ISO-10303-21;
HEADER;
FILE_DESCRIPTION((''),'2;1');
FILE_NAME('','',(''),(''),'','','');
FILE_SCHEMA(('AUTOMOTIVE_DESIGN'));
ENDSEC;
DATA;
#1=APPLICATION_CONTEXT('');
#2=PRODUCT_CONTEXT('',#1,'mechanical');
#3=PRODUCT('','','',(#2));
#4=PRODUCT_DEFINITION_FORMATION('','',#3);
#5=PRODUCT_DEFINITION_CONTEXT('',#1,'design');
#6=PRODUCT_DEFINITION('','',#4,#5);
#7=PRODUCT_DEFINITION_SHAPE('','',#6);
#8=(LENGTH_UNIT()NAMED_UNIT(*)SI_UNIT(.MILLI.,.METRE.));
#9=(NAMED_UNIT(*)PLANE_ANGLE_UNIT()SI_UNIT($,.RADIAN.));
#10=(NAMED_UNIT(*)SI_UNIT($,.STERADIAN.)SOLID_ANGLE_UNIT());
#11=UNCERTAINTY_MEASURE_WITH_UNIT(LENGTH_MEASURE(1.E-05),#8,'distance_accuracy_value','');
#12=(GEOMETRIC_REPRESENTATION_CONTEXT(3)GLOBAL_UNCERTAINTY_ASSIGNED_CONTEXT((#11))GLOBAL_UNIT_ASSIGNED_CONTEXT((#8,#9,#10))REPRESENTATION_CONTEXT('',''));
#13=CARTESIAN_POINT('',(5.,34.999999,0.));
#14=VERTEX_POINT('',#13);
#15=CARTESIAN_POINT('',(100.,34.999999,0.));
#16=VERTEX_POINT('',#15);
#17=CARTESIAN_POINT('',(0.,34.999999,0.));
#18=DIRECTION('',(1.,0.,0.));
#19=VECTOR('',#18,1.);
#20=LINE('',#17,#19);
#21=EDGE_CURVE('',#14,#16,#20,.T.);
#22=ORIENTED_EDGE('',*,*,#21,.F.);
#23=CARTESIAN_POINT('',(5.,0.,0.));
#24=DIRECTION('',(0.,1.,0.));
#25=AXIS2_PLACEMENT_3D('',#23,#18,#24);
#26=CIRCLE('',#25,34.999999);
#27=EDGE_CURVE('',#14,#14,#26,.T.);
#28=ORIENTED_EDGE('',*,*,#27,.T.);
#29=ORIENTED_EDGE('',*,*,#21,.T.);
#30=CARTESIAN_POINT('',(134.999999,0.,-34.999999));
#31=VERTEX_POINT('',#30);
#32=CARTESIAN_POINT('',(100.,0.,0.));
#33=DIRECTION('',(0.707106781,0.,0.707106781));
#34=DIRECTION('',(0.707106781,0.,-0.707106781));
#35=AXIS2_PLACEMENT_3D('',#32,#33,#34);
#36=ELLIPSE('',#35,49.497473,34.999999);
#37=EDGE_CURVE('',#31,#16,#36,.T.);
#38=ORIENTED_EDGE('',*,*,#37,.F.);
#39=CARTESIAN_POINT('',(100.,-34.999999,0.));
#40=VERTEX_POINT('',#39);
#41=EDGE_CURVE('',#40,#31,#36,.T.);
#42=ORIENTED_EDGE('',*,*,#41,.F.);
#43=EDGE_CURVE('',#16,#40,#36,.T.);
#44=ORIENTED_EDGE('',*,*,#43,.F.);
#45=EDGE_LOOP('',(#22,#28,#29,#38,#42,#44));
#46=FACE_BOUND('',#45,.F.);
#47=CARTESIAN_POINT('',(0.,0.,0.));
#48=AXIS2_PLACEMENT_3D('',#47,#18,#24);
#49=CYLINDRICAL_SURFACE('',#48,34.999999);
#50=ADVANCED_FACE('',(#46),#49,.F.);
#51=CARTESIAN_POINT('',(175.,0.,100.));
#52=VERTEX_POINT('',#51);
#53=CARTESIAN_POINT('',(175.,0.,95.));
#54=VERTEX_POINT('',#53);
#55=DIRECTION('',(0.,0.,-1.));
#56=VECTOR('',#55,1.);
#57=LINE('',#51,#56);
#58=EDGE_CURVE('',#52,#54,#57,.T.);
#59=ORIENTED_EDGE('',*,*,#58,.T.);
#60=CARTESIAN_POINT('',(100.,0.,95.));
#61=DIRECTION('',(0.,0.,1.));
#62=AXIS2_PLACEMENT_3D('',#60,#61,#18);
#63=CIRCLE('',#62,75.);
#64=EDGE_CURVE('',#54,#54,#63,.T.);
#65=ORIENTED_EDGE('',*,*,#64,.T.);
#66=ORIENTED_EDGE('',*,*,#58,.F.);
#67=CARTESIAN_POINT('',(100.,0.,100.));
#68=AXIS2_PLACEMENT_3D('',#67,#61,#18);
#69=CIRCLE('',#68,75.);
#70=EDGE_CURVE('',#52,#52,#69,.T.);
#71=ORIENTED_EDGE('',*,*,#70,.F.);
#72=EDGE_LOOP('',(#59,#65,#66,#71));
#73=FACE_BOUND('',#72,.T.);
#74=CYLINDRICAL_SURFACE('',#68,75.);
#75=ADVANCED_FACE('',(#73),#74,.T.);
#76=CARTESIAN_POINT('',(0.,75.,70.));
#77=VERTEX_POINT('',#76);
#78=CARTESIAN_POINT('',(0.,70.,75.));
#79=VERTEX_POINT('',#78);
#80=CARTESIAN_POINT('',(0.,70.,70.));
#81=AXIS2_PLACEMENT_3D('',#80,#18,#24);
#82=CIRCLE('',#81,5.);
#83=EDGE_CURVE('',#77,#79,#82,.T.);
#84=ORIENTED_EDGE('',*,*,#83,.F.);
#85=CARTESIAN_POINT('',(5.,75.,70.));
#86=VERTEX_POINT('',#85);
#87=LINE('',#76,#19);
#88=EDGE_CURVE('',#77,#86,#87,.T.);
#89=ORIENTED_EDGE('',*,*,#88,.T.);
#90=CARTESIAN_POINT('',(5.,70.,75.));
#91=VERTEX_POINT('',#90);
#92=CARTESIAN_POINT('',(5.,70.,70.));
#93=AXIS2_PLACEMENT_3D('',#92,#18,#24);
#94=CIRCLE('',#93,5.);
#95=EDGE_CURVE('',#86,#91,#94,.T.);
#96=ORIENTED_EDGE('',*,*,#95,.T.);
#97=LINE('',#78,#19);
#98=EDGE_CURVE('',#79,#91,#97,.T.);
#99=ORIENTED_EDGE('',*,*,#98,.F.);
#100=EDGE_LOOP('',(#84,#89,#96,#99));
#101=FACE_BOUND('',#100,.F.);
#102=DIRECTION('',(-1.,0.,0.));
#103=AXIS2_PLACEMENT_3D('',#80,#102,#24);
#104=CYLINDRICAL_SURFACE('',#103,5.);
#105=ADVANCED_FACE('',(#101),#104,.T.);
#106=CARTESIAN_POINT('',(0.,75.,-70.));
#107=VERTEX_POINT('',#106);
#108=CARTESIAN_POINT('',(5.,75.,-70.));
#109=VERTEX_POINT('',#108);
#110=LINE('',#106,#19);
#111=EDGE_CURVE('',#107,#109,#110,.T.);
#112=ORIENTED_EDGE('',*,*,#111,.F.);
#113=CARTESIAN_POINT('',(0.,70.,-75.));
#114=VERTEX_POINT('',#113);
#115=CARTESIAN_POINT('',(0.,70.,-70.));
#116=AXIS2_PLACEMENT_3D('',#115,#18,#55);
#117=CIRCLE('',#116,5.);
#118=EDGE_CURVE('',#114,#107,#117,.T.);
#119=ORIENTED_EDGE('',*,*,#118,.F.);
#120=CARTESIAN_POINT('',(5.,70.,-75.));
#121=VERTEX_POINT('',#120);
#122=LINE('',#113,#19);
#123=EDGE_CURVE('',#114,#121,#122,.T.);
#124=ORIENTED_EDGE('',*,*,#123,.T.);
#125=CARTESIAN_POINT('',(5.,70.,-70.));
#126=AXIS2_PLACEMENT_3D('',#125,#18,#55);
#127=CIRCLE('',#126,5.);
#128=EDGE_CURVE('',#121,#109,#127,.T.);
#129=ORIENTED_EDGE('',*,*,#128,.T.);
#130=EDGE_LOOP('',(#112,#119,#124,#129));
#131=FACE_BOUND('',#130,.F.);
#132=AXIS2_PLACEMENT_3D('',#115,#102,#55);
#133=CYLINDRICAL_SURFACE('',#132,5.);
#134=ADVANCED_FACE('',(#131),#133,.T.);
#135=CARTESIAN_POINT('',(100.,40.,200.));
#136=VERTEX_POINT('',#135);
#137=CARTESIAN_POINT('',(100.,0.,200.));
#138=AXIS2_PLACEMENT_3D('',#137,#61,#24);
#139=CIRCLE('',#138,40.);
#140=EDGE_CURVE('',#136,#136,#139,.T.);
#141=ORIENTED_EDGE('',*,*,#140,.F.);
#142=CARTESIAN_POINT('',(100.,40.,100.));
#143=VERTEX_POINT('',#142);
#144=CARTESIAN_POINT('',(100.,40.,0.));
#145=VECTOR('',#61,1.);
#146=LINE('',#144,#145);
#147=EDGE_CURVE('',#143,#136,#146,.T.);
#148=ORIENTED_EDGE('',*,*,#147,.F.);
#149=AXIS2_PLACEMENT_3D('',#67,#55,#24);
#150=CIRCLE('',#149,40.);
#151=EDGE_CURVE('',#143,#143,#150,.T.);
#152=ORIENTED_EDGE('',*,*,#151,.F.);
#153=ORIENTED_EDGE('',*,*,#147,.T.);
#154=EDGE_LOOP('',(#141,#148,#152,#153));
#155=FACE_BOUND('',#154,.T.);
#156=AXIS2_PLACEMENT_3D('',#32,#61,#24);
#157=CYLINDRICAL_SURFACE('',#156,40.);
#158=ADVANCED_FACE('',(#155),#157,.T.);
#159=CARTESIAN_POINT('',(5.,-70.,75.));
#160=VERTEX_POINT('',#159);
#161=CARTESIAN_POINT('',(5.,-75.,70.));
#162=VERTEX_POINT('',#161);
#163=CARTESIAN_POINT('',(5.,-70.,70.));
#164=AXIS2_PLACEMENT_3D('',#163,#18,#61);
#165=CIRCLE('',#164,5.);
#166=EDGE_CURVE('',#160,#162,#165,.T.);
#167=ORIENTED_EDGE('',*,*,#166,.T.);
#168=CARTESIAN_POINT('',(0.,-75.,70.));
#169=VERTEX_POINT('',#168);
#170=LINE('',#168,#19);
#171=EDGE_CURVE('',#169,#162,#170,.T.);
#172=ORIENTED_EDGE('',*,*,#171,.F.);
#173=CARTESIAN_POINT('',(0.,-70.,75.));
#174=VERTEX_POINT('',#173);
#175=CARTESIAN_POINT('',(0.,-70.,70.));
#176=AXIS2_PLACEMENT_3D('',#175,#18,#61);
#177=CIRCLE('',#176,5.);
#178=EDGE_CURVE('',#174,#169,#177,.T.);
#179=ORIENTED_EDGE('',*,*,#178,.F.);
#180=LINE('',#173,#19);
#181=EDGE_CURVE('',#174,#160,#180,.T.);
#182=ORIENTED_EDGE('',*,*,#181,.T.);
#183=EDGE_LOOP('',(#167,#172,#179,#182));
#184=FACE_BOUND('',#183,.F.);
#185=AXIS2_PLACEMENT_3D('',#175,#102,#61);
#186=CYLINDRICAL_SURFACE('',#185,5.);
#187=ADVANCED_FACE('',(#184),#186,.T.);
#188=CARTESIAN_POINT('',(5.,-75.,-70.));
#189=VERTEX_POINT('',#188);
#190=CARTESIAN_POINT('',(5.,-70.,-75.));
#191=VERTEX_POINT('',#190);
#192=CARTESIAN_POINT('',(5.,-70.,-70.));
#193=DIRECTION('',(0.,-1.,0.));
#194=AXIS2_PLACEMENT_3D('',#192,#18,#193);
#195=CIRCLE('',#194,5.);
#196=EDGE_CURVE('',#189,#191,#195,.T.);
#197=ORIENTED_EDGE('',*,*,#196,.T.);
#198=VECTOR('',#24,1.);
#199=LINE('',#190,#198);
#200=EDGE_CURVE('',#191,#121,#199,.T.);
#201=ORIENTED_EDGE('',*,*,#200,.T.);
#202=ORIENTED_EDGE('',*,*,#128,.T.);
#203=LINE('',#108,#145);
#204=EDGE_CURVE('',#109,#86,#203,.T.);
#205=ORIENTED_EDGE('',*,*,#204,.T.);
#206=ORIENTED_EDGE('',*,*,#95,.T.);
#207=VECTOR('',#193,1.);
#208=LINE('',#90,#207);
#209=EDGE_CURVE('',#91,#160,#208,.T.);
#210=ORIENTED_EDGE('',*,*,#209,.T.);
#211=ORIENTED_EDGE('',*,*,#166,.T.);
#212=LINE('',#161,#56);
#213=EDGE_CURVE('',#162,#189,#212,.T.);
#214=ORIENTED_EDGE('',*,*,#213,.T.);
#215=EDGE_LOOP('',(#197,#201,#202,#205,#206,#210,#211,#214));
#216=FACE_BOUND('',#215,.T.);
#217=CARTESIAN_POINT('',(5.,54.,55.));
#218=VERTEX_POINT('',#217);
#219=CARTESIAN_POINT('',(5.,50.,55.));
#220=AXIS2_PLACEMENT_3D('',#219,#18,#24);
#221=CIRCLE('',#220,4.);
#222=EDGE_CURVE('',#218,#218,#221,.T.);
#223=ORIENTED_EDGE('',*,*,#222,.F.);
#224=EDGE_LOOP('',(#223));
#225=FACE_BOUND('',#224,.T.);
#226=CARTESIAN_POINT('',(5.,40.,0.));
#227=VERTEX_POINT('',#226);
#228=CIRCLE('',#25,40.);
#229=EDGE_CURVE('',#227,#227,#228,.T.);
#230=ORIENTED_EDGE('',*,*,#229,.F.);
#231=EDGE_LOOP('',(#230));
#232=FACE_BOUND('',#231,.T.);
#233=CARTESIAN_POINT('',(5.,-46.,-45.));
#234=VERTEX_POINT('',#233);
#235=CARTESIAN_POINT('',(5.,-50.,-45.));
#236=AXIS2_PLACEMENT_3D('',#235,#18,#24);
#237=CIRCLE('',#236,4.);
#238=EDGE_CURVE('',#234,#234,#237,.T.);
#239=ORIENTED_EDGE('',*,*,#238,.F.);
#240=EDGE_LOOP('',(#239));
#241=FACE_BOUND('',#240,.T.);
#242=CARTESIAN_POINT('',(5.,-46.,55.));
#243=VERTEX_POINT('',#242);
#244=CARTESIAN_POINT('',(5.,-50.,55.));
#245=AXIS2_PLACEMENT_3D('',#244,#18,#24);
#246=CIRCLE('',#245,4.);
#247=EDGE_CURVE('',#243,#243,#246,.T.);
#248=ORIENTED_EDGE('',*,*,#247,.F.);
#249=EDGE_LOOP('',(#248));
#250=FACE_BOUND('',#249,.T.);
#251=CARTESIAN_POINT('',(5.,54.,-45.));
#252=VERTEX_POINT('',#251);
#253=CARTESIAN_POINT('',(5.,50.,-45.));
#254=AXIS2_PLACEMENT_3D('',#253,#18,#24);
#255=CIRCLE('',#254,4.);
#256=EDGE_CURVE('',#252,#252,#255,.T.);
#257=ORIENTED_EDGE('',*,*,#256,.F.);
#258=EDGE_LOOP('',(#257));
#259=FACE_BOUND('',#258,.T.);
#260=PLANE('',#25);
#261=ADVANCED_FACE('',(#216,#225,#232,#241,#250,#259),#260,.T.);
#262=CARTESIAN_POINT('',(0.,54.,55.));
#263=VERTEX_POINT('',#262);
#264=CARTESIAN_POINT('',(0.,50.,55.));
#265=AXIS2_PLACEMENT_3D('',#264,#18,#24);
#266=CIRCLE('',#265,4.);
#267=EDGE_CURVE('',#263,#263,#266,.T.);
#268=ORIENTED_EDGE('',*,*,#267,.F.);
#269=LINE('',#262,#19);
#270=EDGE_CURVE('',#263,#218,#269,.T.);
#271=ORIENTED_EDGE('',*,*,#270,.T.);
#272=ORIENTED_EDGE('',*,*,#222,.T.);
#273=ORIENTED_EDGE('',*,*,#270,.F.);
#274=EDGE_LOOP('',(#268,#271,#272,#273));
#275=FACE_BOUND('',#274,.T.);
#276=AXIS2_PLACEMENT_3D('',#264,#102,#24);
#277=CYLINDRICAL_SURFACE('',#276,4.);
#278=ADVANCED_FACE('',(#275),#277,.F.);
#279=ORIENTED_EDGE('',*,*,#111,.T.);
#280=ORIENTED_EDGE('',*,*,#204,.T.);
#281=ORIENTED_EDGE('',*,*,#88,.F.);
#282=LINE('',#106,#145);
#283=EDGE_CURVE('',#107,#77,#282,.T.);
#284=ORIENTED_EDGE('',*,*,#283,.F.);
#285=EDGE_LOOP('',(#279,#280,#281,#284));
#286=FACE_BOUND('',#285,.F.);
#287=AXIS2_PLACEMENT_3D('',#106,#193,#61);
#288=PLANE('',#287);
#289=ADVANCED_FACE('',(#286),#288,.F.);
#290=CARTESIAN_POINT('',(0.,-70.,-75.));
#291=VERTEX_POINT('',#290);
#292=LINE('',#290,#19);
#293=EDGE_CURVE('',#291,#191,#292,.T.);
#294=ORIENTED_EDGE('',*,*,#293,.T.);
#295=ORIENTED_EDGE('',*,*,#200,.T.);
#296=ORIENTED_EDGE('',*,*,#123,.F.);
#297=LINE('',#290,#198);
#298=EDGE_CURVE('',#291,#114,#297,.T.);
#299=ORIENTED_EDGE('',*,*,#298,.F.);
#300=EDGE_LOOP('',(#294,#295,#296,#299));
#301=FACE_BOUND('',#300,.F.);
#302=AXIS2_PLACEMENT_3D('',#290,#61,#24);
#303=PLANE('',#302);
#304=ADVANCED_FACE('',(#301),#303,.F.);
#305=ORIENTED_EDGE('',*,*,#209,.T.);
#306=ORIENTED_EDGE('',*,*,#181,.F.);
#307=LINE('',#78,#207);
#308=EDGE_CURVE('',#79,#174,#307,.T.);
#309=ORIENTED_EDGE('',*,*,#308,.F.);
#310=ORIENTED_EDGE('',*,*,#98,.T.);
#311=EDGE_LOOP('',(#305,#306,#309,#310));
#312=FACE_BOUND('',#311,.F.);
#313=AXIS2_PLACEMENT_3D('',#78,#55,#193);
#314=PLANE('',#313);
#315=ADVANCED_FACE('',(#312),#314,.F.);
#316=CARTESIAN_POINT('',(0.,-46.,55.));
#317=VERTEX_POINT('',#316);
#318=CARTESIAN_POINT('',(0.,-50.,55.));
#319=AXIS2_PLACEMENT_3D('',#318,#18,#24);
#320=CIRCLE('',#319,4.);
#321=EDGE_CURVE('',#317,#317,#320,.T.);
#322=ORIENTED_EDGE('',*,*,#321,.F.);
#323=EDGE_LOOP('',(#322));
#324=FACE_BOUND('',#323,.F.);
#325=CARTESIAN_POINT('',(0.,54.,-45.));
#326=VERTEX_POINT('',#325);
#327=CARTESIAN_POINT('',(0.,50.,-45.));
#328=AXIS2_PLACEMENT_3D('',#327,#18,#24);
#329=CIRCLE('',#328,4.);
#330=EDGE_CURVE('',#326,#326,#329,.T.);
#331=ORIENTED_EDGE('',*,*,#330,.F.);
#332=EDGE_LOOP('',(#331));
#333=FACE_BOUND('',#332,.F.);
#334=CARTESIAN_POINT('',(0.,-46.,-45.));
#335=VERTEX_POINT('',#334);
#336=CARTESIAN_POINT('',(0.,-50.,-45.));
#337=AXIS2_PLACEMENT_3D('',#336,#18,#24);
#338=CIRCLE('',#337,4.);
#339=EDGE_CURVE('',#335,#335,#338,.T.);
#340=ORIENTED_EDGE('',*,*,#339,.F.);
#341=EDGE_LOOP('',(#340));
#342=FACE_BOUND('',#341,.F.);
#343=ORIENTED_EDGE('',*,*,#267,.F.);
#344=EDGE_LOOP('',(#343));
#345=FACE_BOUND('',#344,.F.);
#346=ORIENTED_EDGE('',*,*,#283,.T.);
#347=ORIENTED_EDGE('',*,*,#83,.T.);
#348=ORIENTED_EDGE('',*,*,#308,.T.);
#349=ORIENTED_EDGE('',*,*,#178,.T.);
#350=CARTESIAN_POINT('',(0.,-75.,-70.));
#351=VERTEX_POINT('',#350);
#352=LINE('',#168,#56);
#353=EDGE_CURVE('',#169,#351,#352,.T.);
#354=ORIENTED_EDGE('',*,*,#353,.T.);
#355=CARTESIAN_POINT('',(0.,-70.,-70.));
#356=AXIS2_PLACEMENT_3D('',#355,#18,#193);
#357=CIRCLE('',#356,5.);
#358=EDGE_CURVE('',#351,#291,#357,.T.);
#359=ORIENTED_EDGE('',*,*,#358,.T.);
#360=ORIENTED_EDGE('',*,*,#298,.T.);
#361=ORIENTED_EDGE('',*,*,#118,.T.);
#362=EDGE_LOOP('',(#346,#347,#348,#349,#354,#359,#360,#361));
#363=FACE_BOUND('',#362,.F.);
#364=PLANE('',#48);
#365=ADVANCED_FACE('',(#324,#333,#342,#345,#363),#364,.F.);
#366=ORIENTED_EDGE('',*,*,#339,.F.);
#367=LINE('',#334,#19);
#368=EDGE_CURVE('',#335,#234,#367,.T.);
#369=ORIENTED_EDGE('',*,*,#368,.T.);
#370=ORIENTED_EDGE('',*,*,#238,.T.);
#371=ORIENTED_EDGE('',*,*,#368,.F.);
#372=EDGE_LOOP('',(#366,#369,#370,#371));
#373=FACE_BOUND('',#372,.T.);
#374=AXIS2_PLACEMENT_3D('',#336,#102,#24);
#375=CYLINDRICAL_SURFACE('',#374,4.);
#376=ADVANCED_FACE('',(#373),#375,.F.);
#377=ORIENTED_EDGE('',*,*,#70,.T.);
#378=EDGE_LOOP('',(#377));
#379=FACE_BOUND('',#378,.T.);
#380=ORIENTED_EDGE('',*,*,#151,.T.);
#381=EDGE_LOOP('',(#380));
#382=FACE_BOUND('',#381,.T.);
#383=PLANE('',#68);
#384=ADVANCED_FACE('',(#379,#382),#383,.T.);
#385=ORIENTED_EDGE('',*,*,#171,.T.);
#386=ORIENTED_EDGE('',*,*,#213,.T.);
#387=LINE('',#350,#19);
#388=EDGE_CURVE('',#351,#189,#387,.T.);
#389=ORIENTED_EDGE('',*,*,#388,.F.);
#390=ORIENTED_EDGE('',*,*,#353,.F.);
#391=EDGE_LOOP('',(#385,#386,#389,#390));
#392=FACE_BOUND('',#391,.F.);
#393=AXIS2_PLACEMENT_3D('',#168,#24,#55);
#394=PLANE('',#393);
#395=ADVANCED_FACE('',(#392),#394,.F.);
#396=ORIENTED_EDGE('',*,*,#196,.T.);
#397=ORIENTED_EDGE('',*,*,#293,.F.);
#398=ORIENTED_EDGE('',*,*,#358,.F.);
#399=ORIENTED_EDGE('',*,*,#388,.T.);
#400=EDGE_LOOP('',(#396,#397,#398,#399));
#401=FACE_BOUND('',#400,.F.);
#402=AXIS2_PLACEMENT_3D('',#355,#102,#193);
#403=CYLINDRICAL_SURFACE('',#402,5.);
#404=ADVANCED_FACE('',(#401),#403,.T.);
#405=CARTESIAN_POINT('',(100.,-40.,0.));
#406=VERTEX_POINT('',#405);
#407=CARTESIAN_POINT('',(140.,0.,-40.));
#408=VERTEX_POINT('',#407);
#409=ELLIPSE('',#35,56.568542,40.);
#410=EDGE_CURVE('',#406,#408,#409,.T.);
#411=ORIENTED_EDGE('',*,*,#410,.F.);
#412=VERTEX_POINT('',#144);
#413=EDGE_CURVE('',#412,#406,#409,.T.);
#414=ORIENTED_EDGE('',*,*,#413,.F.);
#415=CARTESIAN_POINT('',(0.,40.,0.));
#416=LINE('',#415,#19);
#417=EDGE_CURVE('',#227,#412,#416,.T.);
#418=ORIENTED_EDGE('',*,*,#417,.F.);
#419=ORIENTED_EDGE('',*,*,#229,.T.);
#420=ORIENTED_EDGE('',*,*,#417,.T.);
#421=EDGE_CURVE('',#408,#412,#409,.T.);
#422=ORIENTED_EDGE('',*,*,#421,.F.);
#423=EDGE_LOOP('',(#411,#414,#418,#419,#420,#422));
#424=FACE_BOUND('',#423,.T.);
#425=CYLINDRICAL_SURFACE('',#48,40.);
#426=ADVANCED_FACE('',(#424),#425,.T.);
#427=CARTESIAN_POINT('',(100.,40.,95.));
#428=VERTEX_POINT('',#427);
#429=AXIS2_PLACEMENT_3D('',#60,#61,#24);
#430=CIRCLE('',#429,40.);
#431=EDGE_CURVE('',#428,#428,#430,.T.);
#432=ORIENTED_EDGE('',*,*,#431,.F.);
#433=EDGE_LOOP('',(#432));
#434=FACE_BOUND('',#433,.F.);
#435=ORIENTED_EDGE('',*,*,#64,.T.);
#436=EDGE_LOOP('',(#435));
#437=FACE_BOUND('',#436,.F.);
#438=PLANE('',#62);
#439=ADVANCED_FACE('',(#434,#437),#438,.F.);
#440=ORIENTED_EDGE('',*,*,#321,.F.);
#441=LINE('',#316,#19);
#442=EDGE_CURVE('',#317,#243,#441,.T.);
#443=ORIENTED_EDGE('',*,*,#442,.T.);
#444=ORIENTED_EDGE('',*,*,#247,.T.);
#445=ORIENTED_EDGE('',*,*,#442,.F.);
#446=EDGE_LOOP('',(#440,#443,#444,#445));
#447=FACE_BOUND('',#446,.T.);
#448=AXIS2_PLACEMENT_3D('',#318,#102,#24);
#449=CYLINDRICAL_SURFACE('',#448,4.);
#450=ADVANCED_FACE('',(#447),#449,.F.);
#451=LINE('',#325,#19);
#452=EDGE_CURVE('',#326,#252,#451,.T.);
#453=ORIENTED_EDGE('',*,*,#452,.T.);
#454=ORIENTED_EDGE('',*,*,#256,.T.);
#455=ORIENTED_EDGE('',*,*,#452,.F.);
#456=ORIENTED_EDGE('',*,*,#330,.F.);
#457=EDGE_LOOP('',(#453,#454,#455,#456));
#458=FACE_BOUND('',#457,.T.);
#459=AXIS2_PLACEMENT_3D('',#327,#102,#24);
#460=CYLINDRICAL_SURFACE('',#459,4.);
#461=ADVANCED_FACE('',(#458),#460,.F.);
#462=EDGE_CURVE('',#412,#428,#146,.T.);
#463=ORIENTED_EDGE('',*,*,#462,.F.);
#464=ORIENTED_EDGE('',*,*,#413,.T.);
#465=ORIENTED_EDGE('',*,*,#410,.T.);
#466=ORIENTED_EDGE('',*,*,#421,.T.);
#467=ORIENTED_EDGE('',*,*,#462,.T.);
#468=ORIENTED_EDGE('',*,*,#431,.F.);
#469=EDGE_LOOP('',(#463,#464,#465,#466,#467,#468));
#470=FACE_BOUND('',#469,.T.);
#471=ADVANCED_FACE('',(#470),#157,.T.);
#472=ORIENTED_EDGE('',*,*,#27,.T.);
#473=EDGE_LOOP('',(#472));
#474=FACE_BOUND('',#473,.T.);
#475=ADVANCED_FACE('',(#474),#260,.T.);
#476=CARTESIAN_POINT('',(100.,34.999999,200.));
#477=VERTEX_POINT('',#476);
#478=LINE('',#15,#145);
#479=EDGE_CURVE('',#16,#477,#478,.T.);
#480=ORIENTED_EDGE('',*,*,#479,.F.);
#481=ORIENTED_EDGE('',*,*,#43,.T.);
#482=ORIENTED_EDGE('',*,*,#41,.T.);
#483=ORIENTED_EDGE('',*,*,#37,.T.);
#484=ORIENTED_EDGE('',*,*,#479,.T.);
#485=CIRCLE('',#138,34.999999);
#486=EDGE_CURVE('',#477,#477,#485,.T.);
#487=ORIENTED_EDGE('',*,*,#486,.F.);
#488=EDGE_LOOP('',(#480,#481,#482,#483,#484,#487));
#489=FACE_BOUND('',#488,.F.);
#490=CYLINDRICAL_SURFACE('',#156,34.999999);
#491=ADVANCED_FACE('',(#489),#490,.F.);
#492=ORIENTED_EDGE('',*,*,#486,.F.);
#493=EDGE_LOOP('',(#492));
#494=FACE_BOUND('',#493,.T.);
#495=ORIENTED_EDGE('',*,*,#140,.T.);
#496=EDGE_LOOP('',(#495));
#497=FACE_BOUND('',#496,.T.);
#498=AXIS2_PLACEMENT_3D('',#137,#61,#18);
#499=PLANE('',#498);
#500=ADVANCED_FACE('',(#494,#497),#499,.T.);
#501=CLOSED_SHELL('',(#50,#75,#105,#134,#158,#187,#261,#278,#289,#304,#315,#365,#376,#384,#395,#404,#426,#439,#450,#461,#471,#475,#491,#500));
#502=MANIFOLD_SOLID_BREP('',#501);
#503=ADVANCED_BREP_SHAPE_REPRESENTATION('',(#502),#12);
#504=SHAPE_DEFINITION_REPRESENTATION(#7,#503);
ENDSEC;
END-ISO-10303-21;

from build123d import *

# Parameters (mm, degrees)
F0_R     = 40
F0_R_2   = 34.9999991059
F5_R     = 75
F5_R_2   = 40
F6_DEPTH = 5
F2_R     = 4
F7_DEPTH = 5


with BuildPart() as f3:
    # F3: sweep along a path in F1
    with BuildLine(Plane.XZ) as f3_path:
        Line((0, 0), (100, 0))
        Line((100, 0), (100, 200))
    # F0 (on Right) → F3 (sweep)
    with BuildSketch(Plane.YZ):
        Circle(F0_R)
        Circle(F0_R_2, mode=Mode.SUBTRACT)
    sweep(path=f3_path.line, transition=Transition.RIGHT)

    # F5 (on face) → F6 (join)
    with BuildSketch(Plane.XY.offset(100)):
        with Locations((100, 0)):
            Circle(F5_R)
        with Locations((100, 0)):
            Circle(F5_R_2, mode=Mode.SUBTRACT)
    extrude(amount=-F6_DEPTH)

    # F2 (on Right) → F7 (join)
    with BuildSketch(Plane.YZ):
        with BuildLine():
            Line((-70, -75), (70, -75))
            ThreePointArc((70, -75), (73.5355339059, -73.5355339059), (75, -70))
            Line((75, -70), (75, 70))
            ThreePointArc((75, 70), (73.5355339059, 73.5355339059), (70, 75))
            Line((70, 75), (-70, 75))
            ThreePointArc((-70, 75), (-73.5355339059, 73.5355339059), (-75, 70))
            Line((-75, 70), (-75, -70))
            ThreePointArc((-75, -70), (-73.5355339059, -73.5355339059), (-70, -75))
        make_face()
        with Locations((-50, -45)):
            Circle(F2_R, mode=Mode.SUBTRACT)
        with Locations((50, -45)):
            Circle(F2_R, mode=Mode.SUBTRACT)
        with Locations((-50, 55)):
            Circle(F2_R, mode=Mode.SUBTRACT)
        with Locations((50, 55)):
            Circle(F2_R, mode=Mode.SUBTRACT)
    extrude(amount=F7_DEPTH)


solid = f3.part
